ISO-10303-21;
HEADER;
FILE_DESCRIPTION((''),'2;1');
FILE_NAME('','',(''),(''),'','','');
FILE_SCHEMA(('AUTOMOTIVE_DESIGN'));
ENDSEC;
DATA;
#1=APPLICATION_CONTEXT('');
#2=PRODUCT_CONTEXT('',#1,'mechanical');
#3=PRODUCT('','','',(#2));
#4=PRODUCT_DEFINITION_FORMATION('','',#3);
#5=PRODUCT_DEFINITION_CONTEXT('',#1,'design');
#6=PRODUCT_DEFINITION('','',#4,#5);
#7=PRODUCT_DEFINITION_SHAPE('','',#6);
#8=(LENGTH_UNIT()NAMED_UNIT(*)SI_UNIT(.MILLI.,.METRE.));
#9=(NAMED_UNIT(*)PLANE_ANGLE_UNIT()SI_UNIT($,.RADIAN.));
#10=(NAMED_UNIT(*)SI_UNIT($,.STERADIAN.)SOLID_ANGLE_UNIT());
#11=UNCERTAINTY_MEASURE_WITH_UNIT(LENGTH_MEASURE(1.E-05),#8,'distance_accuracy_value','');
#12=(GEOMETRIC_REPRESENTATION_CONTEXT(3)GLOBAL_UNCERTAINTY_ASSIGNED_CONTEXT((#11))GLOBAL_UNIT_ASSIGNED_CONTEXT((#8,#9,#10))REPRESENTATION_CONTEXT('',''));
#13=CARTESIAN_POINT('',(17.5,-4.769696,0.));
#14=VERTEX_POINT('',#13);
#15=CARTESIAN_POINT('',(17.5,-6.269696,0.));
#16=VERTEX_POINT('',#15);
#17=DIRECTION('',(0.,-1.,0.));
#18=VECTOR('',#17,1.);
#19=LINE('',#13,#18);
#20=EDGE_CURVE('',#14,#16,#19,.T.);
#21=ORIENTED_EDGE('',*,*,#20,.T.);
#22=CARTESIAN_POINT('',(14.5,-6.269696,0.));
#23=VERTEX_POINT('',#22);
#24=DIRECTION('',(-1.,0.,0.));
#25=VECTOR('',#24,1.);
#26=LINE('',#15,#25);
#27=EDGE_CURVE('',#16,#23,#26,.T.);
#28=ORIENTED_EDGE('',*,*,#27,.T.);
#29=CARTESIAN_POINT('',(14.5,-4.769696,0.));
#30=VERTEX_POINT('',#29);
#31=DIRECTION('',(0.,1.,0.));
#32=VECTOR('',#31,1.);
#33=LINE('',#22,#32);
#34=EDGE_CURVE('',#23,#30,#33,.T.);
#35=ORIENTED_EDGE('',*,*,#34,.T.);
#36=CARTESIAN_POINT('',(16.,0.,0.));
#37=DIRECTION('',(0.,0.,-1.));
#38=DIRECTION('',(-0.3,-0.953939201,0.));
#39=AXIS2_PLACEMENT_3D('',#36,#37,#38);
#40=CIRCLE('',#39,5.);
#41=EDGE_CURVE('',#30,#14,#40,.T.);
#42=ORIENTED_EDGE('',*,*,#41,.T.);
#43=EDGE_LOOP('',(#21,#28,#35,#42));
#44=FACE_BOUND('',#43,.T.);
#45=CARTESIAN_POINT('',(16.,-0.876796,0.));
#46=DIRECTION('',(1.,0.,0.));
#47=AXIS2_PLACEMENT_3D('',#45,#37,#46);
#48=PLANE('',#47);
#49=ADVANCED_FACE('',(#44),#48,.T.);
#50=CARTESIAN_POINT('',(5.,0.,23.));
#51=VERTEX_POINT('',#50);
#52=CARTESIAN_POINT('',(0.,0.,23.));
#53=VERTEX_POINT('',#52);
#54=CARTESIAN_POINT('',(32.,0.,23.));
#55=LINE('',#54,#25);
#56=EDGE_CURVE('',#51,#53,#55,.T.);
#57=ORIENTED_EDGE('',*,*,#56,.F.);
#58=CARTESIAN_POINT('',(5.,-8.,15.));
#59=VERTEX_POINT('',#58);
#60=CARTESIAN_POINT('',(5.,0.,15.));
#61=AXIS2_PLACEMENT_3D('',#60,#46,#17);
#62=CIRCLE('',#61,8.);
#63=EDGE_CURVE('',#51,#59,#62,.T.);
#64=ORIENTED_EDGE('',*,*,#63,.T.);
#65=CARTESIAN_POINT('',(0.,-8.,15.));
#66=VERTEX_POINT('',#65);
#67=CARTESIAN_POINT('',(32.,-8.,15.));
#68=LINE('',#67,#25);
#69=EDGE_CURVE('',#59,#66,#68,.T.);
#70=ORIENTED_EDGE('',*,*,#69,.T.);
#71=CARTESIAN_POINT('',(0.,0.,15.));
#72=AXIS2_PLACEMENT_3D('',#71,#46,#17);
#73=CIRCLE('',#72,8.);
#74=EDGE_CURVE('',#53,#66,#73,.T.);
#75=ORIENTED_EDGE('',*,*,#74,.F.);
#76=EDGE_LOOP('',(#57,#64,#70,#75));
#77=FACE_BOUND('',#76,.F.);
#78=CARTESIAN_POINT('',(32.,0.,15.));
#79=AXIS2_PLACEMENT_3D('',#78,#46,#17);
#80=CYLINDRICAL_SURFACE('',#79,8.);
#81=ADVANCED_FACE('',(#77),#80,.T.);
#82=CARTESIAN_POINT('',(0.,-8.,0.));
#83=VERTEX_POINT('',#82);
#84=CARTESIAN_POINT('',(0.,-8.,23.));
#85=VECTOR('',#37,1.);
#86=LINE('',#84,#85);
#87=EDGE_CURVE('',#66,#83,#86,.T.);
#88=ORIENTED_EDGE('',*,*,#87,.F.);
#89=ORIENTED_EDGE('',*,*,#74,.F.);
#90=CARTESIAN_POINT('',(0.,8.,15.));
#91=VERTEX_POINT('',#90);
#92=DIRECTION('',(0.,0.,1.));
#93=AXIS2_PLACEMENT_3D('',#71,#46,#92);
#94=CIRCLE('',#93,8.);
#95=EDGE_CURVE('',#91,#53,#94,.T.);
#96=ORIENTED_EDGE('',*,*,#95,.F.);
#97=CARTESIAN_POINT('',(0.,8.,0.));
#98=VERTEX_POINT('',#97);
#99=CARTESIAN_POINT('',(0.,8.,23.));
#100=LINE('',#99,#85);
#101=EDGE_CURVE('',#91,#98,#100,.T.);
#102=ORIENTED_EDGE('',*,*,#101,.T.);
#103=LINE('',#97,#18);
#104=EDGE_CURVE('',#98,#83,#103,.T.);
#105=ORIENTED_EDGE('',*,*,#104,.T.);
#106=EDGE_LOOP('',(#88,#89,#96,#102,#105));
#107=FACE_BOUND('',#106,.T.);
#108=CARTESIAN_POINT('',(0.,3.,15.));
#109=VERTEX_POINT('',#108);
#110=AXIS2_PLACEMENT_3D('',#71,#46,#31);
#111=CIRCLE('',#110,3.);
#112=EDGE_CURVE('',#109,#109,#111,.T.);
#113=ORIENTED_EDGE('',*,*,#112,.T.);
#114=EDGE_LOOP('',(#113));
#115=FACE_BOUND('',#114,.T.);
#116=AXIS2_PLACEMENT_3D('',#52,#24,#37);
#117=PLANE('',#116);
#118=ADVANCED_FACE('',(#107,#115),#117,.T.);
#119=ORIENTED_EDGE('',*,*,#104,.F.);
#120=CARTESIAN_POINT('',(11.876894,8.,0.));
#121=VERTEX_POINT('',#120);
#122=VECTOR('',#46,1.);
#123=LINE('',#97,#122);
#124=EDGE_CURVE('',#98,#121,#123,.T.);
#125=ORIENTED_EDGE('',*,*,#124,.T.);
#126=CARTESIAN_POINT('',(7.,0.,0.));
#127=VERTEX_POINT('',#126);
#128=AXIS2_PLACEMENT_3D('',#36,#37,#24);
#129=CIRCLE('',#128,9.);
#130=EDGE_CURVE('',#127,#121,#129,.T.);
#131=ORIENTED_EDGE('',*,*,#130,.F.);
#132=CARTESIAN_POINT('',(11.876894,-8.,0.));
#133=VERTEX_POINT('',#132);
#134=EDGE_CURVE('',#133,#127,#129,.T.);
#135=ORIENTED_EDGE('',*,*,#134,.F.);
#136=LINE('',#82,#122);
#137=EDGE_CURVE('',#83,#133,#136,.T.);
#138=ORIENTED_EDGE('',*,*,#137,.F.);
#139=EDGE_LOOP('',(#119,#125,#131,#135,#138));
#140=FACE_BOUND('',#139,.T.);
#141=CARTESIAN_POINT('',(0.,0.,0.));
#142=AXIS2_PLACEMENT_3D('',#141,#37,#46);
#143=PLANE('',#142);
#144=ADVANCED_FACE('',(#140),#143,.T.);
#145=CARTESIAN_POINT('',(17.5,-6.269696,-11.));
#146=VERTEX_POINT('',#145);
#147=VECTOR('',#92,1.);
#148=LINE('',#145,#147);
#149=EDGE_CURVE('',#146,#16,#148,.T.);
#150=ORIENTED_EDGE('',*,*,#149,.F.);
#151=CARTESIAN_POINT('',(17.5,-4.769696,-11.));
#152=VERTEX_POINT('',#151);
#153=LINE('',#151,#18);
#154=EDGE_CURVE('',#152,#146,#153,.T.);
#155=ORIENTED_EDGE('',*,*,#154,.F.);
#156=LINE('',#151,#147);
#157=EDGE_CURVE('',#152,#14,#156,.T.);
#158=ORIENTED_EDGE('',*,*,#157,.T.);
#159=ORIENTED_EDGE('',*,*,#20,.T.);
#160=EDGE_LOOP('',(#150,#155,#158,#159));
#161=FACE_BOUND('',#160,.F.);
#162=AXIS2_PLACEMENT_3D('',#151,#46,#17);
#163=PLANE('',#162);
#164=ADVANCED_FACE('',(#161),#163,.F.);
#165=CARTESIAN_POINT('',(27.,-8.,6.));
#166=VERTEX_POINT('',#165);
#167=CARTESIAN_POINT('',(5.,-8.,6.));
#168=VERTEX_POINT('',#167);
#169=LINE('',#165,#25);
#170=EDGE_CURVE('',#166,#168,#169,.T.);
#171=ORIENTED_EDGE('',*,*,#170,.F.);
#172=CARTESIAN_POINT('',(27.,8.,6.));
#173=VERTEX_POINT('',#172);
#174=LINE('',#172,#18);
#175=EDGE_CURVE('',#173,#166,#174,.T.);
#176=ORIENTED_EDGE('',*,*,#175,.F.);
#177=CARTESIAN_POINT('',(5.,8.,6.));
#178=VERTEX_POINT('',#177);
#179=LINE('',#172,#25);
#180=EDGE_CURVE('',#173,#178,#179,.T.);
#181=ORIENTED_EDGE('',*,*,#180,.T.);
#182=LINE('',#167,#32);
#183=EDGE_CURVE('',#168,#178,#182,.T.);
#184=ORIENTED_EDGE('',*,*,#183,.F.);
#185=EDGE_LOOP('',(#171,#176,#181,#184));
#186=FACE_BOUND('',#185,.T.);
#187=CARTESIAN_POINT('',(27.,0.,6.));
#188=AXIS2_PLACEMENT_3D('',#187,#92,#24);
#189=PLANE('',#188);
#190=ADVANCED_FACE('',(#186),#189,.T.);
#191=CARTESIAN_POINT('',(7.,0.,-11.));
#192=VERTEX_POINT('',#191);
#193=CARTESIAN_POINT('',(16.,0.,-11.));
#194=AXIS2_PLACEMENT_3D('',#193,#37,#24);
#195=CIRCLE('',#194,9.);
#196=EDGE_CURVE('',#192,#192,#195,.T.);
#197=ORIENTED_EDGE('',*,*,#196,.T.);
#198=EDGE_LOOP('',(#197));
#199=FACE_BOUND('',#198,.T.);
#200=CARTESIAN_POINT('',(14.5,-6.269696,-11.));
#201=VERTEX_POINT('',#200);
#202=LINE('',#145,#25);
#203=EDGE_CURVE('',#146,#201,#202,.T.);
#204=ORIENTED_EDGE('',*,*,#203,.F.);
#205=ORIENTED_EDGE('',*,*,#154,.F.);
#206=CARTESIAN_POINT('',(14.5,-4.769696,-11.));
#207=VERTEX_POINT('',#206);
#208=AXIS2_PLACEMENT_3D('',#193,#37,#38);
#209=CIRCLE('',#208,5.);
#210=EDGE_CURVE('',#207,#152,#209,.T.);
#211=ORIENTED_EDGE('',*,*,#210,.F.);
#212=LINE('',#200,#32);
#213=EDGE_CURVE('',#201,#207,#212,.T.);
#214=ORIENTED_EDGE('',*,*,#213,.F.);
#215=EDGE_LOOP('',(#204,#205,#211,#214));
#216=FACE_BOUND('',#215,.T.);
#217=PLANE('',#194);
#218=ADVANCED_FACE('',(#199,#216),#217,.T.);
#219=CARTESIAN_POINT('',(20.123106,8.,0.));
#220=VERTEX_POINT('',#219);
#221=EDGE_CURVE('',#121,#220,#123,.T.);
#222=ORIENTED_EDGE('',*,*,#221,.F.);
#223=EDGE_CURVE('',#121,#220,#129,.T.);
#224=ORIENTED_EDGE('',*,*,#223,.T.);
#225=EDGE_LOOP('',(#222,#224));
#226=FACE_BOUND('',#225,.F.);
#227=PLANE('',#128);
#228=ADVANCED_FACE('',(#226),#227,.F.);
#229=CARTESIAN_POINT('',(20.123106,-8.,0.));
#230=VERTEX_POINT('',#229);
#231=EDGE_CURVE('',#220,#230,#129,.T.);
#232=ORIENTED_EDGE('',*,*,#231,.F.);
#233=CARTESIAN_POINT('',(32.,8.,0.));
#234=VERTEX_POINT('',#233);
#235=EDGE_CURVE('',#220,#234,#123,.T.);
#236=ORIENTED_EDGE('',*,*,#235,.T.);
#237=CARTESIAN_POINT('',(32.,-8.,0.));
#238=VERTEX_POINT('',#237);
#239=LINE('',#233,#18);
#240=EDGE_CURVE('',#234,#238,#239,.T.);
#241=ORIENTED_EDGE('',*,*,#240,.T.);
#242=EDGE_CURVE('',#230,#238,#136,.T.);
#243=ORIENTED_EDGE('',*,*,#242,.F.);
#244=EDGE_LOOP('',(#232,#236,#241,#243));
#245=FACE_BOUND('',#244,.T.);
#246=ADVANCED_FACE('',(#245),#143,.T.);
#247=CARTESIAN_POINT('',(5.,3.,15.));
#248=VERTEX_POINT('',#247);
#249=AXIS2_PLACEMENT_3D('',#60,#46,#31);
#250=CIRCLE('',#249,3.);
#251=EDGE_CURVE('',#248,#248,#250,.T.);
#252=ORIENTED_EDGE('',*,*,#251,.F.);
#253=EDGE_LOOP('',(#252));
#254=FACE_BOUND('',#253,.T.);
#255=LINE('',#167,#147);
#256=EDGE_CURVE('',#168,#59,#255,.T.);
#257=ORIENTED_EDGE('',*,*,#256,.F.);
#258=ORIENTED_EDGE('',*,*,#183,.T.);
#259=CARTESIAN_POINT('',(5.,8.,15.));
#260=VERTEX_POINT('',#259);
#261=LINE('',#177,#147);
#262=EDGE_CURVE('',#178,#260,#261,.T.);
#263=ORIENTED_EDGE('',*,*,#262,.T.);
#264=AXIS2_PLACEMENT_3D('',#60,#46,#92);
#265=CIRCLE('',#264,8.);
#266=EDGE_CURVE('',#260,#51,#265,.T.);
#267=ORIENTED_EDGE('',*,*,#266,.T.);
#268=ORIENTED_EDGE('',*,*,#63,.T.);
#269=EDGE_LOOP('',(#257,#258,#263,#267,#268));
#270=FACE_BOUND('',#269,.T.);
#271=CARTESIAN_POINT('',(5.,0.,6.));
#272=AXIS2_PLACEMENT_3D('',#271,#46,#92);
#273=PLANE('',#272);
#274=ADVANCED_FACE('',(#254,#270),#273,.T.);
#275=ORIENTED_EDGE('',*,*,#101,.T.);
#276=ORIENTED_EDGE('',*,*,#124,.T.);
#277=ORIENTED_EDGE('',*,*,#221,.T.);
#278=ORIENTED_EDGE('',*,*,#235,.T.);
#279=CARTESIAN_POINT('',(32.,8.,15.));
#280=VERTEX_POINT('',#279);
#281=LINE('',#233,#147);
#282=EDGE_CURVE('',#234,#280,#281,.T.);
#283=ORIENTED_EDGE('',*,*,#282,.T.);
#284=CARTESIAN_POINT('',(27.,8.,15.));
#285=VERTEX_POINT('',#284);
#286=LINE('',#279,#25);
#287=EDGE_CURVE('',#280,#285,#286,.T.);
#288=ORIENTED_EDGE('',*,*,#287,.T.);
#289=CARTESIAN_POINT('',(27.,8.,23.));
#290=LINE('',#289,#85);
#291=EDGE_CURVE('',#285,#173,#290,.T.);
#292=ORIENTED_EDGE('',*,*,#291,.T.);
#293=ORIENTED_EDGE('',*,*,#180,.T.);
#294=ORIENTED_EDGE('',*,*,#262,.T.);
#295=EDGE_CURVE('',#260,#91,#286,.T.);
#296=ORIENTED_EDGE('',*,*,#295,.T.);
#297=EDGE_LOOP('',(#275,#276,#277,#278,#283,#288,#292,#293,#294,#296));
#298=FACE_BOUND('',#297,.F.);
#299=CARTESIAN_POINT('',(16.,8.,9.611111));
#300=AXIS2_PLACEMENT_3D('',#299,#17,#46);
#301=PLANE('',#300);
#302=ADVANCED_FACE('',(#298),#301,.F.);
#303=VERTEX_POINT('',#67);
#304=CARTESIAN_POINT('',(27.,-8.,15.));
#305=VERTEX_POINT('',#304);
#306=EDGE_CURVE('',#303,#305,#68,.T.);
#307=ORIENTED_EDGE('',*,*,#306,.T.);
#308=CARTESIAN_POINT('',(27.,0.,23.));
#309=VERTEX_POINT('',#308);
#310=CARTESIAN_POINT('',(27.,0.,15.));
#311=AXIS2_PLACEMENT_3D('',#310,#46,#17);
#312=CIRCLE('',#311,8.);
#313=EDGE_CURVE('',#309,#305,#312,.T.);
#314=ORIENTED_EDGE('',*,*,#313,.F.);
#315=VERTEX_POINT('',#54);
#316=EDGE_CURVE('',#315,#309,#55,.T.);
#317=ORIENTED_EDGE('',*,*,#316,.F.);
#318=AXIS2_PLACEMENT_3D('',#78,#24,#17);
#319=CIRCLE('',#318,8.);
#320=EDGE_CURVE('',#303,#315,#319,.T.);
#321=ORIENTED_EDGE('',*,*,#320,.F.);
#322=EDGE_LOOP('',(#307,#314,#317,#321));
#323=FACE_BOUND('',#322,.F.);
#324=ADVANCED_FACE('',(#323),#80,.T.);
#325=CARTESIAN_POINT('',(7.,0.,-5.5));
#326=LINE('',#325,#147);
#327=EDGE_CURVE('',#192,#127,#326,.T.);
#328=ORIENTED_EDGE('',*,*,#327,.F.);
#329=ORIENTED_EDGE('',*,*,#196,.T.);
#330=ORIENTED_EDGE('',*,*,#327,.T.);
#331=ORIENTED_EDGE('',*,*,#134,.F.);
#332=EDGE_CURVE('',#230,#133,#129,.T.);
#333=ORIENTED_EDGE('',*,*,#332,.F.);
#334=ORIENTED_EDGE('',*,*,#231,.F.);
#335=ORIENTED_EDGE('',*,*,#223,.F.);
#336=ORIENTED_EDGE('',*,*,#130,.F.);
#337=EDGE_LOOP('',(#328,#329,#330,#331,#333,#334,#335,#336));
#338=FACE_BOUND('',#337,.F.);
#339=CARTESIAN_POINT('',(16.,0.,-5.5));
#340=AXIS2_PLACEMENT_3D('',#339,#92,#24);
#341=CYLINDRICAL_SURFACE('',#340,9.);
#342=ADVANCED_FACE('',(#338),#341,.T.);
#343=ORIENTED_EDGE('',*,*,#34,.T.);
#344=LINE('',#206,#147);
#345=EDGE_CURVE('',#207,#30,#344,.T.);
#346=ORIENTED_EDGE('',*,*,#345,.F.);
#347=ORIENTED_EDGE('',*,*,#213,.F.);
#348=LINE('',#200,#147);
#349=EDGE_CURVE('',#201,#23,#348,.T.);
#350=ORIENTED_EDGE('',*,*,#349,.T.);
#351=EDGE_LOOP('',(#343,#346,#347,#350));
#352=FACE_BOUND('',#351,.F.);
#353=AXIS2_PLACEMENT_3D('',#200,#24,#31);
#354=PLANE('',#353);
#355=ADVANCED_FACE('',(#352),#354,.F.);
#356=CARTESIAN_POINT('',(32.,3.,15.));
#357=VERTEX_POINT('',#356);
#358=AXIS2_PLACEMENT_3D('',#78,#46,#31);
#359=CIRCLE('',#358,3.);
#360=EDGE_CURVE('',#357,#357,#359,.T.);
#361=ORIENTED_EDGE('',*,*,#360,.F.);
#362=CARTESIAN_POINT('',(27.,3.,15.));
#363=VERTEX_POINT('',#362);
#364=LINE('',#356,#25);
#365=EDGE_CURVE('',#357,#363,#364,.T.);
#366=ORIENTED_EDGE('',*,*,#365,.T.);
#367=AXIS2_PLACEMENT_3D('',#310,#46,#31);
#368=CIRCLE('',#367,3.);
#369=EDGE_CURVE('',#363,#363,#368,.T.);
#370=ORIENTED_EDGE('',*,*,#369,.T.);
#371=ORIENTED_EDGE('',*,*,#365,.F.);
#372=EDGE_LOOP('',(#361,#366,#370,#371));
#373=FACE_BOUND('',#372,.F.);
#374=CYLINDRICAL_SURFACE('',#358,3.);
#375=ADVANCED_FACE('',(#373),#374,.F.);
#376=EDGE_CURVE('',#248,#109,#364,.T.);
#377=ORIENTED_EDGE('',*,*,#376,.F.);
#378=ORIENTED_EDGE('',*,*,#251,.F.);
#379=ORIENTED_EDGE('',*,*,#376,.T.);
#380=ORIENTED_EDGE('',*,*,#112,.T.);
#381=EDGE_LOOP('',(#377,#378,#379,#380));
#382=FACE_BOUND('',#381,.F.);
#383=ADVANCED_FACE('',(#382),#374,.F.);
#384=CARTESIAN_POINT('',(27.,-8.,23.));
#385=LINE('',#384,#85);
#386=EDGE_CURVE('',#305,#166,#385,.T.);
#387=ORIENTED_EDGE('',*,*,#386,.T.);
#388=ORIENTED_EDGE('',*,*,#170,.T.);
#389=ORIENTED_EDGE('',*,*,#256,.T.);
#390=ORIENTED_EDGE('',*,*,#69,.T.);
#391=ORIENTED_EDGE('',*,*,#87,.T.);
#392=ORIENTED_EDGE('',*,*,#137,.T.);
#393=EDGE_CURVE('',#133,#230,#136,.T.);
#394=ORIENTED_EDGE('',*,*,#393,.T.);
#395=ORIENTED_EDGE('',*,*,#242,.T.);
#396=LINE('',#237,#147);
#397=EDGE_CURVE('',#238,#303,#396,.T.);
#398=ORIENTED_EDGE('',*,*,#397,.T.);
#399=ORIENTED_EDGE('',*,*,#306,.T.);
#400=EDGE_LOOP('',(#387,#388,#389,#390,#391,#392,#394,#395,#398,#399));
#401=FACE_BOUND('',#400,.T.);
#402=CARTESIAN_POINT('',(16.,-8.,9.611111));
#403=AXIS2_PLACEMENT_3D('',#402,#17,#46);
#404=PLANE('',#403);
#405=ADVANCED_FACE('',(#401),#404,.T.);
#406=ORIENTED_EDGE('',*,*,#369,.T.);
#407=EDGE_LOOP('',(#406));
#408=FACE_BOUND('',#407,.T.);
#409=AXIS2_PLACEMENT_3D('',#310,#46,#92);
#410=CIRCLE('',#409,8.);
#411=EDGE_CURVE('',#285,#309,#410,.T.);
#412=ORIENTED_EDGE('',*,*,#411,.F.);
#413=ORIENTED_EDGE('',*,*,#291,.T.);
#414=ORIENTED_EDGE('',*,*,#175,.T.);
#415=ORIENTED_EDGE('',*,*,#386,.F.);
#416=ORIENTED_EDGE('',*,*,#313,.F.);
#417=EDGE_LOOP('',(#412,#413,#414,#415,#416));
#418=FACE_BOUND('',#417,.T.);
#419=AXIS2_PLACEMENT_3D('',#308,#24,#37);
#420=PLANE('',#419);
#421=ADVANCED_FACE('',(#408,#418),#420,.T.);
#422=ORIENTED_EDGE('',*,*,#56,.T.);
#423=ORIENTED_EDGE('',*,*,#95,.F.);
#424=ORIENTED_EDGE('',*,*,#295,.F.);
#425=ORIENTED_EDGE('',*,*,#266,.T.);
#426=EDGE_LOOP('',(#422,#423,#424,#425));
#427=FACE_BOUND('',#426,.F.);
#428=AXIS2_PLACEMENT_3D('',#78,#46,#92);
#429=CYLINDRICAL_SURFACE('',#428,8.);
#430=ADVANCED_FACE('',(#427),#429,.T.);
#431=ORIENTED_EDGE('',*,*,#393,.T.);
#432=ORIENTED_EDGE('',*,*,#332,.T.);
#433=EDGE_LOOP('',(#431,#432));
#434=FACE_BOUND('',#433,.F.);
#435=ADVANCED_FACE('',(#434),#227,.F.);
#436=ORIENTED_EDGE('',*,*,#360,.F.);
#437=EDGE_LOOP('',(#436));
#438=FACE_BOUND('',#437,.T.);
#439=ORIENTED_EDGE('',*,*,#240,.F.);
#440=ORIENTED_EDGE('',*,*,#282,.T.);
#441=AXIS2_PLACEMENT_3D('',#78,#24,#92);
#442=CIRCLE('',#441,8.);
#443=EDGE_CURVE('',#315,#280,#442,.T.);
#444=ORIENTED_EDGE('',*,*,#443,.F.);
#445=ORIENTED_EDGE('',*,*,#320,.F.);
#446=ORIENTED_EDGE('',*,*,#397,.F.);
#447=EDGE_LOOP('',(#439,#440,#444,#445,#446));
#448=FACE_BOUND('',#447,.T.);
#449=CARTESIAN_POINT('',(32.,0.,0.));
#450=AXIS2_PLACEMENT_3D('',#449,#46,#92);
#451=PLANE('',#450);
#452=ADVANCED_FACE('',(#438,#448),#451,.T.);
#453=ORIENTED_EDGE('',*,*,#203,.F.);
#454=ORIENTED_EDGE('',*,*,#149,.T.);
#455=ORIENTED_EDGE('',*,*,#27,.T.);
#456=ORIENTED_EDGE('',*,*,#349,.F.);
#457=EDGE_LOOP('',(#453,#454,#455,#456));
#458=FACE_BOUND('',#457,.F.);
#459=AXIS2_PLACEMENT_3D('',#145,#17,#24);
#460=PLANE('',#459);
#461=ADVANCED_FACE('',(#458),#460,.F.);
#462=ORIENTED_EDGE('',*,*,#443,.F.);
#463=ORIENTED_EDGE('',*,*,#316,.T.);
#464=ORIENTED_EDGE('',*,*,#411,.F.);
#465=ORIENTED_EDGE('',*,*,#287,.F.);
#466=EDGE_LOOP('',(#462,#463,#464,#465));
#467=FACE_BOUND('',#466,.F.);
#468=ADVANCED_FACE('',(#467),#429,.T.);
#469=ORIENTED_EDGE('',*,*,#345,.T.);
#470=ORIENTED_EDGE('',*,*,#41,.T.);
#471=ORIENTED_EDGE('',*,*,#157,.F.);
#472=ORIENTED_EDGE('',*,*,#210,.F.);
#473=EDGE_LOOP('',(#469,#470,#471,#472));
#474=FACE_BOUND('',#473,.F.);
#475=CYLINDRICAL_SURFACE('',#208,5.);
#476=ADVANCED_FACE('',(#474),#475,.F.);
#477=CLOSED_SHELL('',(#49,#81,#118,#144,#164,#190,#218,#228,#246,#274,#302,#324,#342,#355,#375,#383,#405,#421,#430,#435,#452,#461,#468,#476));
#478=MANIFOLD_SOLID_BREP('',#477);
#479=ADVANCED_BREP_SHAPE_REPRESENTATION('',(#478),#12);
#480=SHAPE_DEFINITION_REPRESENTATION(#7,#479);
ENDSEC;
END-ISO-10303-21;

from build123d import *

# Parameters (mm, degrees)
F0_W     = 9
F0_H     = 11
F2_DEPTH = 8
F4_DEPTH = 11
F5_R     = 3
F6_DEPTH = 32.001


# Not quite as in the source:
# - a feature names something its author has since deleted; it is built from what else it names


with BuildPart() as f1:
    # F0 (on Front) → F1 (revolve)
    with BuildSketch(Plane.XZ):
        with Locations((11.5, -5.5)):
            Rectangle(F0_W, F0_H)
    revolve(axis=Axis((16, 0, -5.5), (0, 0, -1)))

    # F0 (on Front) → F2 (join, symmetric)
    with BuildSketch(Plane.XZ):
        Polygon((0, 23), (0, 0), (7, 0), (16, 0), (32, 0), (32, 23), (27, 23), (27, 6), (5, 6), (5, 23), align=None)
    extrude(amount=F2_DEPTH, both=True)

    # F3 (on face) → F4 (cut)
    with BuildSketch(Plane(origin=(0, 0, -11), x_dir=(1, 0, 0), z_dir=(0, 0, -1))):
        with BuildLine():
            Line((14.5, 6.2696960071), (14.5, 4.7696960071))
            ThreePointArc((14.5, 4.7696960071), (16, -5), (17.5, 4.7696960071))
            Line((17.5, 4.7696960071), (17.5, 6.2696960071))
            Line((17.5, 6.2696960071), (14.5, 6.2696960071))
        make_face()
    extrude(amount=-F4_DEPTH, mode=Mode.SUBTRACT)

    # F5 (on face) → F6 (cut, through all)
    with BuildSketch(Plane.YZ.offset(32)):
        with Locations((0, 15)):
            Circle(F5_R)
        with BuildLine():
            ThreePointArc((-8, 15), (-5.6568542495, 20.6568542495), (0, 23))
            Line((0, 23), (-8, 23))
            Line((-8, 23), (-8, 15))
        make_face()
        with BuildLine():
            ThreePointArc((0, 23), (5.6568542495, 20.6568542495), (8, 15))
            Line((8, 15), (8, 23))
            Line((8, 23), (0, 23))
        make_face()
    extrude(amount=-F6_DEPTH, mode=Mode.SUBTRACT)


solid = f1.part
